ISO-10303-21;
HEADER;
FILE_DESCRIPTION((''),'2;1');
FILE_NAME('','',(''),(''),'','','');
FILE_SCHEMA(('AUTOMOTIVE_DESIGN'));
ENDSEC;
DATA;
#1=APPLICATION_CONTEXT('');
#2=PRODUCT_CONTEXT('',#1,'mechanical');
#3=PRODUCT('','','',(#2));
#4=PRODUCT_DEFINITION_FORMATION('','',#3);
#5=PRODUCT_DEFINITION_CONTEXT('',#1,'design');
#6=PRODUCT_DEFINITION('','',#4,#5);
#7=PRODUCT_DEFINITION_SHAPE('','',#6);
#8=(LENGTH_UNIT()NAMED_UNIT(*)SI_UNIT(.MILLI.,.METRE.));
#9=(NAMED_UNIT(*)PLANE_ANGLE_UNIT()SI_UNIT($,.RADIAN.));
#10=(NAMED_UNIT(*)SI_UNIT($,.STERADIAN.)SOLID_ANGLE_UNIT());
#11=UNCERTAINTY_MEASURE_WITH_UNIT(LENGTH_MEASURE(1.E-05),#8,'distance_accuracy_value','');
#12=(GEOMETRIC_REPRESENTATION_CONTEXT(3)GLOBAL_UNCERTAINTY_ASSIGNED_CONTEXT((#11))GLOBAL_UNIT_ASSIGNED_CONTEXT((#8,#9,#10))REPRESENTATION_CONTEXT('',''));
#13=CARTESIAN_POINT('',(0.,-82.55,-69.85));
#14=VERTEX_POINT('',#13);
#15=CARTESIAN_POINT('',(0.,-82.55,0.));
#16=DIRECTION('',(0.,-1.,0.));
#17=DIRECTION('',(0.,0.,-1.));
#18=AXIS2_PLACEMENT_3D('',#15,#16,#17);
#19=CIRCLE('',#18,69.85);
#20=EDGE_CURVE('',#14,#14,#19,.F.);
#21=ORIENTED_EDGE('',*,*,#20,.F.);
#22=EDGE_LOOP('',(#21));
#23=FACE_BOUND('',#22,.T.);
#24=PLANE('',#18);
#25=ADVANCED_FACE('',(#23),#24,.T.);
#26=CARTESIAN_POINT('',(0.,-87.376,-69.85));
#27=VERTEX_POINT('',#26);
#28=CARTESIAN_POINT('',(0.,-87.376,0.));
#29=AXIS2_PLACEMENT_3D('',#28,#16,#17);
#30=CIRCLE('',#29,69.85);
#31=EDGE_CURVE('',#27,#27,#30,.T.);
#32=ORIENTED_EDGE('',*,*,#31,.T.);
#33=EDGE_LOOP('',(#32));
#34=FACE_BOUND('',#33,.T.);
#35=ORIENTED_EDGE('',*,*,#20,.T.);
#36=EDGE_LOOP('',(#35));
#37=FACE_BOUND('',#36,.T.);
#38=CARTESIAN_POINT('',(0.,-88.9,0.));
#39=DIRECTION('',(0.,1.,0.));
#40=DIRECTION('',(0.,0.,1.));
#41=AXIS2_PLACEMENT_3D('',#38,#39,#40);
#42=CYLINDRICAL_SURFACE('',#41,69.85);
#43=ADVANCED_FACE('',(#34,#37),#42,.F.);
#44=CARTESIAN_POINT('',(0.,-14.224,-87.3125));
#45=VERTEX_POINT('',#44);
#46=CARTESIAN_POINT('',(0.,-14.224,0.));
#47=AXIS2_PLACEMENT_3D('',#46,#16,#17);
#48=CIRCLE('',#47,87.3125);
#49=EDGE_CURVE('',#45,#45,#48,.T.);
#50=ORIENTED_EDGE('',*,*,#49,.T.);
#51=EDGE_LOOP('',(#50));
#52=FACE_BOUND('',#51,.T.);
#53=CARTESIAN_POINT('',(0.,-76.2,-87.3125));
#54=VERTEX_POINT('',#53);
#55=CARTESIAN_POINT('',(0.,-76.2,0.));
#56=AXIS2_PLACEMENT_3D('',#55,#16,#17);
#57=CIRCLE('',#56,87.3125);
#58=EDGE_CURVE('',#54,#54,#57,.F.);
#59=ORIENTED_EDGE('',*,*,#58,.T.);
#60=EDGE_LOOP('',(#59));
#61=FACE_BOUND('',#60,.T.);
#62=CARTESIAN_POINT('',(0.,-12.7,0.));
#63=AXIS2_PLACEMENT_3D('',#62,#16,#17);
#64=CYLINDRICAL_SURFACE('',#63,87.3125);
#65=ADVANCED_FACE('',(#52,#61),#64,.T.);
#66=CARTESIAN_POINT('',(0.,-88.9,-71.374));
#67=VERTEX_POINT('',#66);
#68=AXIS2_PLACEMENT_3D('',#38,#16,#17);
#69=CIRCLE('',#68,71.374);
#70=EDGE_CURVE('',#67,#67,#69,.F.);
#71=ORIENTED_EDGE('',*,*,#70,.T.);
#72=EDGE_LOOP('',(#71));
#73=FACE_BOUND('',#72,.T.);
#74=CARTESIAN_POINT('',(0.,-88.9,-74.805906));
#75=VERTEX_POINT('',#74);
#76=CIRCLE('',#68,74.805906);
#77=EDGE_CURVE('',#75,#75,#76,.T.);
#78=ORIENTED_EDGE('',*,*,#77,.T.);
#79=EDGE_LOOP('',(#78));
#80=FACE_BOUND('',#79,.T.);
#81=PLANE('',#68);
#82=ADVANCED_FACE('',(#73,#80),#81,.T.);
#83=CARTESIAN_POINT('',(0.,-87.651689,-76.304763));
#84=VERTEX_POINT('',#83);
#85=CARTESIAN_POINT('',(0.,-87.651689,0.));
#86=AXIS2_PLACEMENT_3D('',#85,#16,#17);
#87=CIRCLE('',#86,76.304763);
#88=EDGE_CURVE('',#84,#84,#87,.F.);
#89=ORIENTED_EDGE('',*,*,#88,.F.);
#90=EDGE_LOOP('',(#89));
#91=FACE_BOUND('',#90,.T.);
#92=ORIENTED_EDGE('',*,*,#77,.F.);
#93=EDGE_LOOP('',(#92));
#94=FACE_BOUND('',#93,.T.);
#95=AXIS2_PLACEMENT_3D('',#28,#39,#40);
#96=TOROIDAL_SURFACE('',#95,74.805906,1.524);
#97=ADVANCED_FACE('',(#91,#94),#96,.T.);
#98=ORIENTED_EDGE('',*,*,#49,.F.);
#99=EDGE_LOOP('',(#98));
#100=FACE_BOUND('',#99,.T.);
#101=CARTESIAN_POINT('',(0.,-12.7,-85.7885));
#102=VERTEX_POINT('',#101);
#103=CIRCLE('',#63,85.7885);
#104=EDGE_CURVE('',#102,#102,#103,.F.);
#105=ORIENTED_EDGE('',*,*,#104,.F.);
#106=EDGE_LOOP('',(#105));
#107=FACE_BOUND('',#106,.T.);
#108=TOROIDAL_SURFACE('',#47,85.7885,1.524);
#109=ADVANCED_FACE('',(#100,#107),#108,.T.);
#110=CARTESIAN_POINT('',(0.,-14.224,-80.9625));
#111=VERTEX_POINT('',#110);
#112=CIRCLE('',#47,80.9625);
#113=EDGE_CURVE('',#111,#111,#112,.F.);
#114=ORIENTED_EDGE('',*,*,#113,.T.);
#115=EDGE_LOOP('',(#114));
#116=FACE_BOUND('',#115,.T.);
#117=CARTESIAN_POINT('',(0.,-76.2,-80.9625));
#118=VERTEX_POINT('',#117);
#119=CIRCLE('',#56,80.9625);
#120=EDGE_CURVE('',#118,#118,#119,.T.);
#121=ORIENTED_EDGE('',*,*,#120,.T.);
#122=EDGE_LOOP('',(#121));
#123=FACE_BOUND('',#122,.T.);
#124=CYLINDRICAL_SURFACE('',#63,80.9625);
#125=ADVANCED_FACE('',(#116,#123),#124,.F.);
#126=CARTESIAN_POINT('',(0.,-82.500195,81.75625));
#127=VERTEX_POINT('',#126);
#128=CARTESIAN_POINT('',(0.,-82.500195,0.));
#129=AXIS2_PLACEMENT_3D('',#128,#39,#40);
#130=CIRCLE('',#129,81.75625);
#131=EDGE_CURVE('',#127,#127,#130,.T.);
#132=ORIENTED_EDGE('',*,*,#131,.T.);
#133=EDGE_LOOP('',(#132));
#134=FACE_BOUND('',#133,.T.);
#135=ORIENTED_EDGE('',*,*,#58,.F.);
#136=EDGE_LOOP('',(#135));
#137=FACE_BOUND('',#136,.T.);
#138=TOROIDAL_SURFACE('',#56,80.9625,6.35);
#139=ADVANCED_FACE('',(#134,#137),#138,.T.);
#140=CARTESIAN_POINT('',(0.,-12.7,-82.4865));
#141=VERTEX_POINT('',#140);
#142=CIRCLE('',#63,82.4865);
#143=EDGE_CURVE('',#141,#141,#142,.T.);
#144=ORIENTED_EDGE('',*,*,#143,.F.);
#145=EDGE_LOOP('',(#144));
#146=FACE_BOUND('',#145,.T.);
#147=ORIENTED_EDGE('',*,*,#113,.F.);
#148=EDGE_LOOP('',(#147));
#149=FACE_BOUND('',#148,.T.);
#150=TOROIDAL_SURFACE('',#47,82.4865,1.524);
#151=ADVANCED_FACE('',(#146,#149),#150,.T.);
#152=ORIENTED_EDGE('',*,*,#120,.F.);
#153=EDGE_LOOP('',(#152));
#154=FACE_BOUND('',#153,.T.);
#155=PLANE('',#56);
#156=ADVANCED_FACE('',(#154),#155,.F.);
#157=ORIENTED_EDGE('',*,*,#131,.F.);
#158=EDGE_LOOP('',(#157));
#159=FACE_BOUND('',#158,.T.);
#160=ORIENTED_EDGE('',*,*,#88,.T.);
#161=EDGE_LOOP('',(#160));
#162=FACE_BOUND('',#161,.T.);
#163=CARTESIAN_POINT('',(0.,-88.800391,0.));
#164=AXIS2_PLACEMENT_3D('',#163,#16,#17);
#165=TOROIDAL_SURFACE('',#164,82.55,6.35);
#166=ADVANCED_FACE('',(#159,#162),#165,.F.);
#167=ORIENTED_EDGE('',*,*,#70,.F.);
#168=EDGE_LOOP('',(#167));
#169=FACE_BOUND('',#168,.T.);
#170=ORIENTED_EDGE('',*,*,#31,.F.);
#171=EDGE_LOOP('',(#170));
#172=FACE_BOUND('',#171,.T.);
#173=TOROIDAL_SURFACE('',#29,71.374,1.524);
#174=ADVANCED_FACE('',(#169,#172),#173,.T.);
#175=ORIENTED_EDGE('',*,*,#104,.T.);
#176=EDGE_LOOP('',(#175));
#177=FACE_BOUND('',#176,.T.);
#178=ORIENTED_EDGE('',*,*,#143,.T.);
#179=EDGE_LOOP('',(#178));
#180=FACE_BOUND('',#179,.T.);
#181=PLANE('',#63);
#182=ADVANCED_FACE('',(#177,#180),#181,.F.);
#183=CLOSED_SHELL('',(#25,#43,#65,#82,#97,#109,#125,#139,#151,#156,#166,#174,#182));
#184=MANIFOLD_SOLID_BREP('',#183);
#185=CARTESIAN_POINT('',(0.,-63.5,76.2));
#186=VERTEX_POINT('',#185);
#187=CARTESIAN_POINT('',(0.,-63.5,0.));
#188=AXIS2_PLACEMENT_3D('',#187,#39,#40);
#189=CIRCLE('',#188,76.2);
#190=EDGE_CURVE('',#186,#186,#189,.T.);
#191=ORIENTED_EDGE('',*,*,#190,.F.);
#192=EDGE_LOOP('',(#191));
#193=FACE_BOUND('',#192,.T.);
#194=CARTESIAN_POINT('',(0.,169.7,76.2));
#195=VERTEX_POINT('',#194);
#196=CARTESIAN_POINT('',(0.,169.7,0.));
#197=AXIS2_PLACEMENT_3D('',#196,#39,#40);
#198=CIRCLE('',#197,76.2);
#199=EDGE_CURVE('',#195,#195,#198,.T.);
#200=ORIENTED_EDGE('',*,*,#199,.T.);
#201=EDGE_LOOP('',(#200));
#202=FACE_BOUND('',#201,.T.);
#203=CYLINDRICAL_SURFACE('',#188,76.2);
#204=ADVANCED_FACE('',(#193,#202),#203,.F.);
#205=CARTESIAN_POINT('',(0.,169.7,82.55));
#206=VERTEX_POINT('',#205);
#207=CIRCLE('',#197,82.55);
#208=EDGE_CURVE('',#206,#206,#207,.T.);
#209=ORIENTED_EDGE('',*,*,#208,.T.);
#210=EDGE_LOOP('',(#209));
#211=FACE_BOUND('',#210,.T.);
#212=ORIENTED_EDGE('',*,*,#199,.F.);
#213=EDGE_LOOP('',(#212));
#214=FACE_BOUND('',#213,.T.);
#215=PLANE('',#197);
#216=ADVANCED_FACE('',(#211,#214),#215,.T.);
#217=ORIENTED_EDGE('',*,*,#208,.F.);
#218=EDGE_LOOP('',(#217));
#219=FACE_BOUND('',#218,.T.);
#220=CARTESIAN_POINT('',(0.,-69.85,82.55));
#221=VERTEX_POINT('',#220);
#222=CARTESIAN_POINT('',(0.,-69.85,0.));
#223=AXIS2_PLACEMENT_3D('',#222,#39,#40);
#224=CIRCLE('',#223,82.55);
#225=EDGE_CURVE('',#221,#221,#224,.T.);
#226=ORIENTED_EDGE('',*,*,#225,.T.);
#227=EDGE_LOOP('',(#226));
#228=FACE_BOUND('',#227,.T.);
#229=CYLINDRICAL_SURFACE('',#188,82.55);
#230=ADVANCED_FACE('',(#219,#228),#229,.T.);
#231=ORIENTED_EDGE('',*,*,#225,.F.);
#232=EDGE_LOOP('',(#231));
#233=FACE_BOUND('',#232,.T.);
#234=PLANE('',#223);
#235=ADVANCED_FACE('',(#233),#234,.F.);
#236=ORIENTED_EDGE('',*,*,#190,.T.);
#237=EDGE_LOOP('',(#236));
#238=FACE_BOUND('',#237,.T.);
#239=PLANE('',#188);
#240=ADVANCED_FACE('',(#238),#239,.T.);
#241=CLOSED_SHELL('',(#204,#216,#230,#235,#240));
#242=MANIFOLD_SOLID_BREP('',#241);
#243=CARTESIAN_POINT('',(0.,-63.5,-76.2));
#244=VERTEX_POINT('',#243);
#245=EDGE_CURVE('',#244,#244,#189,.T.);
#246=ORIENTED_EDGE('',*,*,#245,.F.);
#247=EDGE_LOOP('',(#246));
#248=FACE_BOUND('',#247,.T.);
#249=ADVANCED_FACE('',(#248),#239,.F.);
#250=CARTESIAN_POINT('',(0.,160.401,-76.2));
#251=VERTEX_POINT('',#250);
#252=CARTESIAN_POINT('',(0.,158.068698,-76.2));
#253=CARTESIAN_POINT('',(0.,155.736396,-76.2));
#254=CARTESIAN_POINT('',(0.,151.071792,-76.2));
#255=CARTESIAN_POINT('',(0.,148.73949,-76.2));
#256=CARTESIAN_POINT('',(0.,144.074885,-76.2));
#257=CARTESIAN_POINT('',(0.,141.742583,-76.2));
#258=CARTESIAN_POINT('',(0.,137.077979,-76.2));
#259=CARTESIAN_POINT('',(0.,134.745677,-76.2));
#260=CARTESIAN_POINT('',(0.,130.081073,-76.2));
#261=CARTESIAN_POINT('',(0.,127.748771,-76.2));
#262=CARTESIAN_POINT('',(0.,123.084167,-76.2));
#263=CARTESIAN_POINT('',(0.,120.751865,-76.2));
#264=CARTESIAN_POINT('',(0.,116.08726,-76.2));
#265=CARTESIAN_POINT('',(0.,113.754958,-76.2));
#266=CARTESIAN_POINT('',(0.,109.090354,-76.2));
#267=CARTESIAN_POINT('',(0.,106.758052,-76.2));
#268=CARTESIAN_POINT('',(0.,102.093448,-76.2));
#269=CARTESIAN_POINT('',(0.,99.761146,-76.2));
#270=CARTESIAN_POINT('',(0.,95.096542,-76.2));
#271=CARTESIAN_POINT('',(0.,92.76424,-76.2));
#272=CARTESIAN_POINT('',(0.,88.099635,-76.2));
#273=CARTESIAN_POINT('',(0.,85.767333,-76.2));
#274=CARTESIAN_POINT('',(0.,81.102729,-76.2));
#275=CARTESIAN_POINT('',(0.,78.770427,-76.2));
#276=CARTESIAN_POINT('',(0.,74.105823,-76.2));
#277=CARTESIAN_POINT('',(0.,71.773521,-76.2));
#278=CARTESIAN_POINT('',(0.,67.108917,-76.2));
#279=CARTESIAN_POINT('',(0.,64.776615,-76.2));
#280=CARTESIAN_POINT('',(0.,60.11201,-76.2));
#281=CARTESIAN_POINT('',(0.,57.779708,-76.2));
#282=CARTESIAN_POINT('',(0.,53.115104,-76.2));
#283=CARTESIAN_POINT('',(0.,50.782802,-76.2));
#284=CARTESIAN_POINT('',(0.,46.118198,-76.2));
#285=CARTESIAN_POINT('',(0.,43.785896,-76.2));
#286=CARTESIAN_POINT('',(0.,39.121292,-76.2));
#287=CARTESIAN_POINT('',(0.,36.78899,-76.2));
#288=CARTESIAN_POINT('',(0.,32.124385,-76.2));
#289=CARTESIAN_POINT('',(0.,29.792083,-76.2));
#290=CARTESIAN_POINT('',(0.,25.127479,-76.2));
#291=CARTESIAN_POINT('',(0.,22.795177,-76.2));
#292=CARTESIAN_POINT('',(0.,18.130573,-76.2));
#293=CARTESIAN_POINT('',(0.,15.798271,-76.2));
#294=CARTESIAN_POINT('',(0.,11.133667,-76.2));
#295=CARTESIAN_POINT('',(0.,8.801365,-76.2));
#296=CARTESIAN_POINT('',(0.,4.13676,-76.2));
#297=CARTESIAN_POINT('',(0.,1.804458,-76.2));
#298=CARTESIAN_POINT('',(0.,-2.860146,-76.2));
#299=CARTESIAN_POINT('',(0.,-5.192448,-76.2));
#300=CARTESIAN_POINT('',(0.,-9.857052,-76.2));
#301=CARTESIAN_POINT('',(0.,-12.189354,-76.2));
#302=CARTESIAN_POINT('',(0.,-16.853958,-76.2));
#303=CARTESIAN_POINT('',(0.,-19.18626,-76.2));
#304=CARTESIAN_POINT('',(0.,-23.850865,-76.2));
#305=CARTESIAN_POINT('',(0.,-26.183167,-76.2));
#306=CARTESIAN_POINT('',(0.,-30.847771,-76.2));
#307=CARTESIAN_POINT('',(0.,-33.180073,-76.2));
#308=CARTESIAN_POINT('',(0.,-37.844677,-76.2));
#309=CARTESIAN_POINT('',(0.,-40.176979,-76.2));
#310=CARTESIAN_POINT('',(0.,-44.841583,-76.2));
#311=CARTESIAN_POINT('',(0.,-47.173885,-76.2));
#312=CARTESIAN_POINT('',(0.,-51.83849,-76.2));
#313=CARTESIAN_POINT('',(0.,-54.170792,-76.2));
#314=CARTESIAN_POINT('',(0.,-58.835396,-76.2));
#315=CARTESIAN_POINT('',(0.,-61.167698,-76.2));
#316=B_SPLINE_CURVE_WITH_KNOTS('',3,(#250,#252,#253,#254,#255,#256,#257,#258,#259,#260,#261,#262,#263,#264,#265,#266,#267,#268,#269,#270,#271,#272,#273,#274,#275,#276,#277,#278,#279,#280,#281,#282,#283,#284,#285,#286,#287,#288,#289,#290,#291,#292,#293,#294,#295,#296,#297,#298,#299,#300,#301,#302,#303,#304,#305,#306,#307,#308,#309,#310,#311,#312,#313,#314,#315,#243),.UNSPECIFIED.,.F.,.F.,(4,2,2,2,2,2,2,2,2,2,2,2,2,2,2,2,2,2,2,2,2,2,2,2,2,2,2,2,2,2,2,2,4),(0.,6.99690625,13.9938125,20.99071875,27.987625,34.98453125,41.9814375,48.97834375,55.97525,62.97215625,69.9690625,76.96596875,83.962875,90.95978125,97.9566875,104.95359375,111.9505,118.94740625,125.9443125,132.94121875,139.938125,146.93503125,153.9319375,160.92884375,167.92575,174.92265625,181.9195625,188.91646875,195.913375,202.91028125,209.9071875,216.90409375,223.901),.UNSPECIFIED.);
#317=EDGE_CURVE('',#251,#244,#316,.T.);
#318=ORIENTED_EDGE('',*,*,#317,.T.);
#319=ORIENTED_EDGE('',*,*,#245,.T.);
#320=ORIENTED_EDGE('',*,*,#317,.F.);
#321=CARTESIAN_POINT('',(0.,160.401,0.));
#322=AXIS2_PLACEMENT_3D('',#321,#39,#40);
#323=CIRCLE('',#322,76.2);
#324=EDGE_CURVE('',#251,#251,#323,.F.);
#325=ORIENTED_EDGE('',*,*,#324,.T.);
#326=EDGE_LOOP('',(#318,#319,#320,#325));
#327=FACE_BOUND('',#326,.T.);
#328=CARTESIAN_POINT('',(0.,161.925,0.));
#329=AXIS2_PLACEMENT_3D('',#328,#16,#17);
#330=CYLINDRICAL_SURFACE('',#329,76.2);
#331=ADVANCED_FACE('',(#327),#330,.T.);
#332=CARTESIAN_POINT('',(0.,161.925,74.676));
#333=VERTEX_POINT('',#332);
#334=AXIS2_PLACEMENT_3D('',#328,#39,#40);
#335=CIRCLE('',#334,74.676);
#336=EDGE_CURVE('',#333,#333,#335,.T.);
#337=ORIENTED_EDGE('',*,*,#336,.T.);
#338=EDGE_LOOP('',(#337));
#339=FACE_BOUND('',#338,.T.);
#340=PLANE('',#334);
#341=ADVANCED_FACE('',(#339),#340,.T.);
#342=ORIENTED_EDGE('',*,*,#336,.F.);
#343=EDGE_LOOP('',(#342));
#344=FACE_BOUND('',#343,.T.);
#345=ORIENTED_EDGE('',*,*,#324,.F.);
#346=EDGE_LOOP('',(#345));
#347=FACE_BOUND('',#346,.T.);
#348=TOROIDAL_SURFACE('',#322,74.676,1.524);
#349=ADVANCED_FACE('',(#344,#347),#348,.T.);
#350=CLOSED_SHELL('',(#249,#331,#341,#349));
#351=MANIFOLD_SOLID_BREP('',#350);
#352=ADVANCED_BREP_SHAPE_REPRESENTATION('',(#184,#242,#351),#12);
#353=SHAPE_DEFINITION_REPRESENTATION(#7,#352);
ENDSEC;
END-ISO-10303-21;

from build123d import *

# Parameters (mm, degrees)
BOSS_EXTRUDE1_DEPTH      = 169.7
BOSS_EXTRUDE1_DEPTH_BACK = 63.5
SKETCH1_R                = 76.2
SHELL1_T                 = 6.35
SKETCH2_R                = 80.9625
BOSS_EXTRUDE2_DEPTH      = 63.5
SHELL3_T                 = 6.35
FILLET1_R                = 1.524
FILLET2_R                = 6.35
BOSS_EXTRUDE3_START      = 6.35
SKETCH3_R                = 76.2
SKETCH3_R_2              = 69.85
BOSS_EXTRUDE3_DEPTH      = 6.35
FILLET3_R                = 6.35
FILLET4_R                = 1.524
SKETCH4_R                = 76.2
BOSS_EXTRUDE4_DEPTH      = 225.425
FILLET5_R                = 1.524


# Some blends are built 0.0001 mm under size
with BuildPart() as part:
    # Sketch1 → Boss-Extrude1 (new, two sides: drawn at the far end of the back side and taken through both)
    with BuildSketch(Plane(origin=(0, 0, 0), x_dir=(1, 0, 0), z_dir=(0, 1, 0)).offset(-BOSS_EXTRUDE1_DEPTH_BACK)):
        with Locations(Location((0, 0, 0), (0, 0, 270))):
            Circle(SKETCH1_R)
    extrude(amount=BOSS_EXTRUDE1_DEPTH + BOSS_EXTRUDE1_DEPTH_BACK)

    # Shell1
    shell1_openings = [part.faces().sort_by_distance(p)[0] for p in [
        (0, 169.7, 0),
    ]]
    offset(amount=SHELL1_T, openings=shell1_openings, kind=Kind.INTERSECTION)


with BuildPart() as body_2:
    # Sketch2 → Boss-Extrude2 (new body)
    with BuildSketch(Plane.XZ.offset(76.2)):
        with Locations(Location((0, 0, 0), (0, 0, 270))):
            Circle(SKETCH2_R)
    extrude(amount=-BOSS_EXTRUDE2_DEPTH)

    # Shell3
    shell3_openings = [body_2.faces().sort_by_distance(p)[0] for p in [
        (0, -12.7, 0),
    ]]
    offset(amount=SHELL3_T, openings=shell3_openings, kind=Kind.INTERSECTION)

    # Fillet1
    # the kernel refuses this fillet: 1.524 mm, written as the material it takes off along each edge
    with BuildSketch(Plane(origin=(0, -12.7, 0), x_dir=(0, 0, -1), z_dir=(-1, 0, 0))) as fillet1_piece_1:
        with BuildLine():
            CenterArc((87.3125 - FILLET1_R, FILLET1_R), FILLET1_R, 270, 90)
            Line((87.3125, FILLET1_R), (87.3125, 0))
            Line((87.3125, 0), (87.3125 - FILLET1_R, 0))
        make_face()
    revolve(axis=Axis((0, -12.7, 0), (0, -1, 0)), mode=Mode.SUBTRACT)
    with BuildSketch(Plane(origin=(0, -12.7, 0), x_dir=(0, 0, -1), z_dir=(-1, 0, 0))) as fillet1_piece_2:
        with BuildLine():
            CenterArc((80.9625 + FILLET1_R, FILLET1_R), FILLET1_R, 180, 90)
            Line((80.9625 + FILLET1_R, 0), (80.9625, 0))
            Line((80.9625, 0), (80.9625, FILLET1_R))
        make_face()
    revolve(axis=Axis((0, -12.7, 0), (0, -1, 0)), mode=Mode.SUBTRACT)

    # Fillet2
    fillet2_edges = [body_2.edges().sort_by_distance(p)[0] for p in [
        (0, -82.55, 87.3125),
    ]]
    fillet(fillet2_edges, radius=FILLET2_R)

    # Sketch3 → Boss-Extrude3 (add)
    with BuildSketch(Plane.XZ.offset(82.55).offset(BOSS_EXTRUDE3_START)):
        with Locations(Location((0, 0, 0), (0, 0, 270))):
            Circle(SKETCH3_R)
        with Locations(Location((0, 0, 0), (0, 0, 270))):
            Circle(SKETCH3_R_2, mode=Mode.SUBTRACT)
    extrude(amount=-BOSS_EXTRUDE3_DEPTH)

    # Fillet3
    fillet3_edges = [body_2.edges().sort_by_distance(p)[0] for p in [
        (0, -82.55, 76.2),
    ]]
    fillet(fillet3_edges, radius=FILLET3_R - 0.0001)  # a hair under: the kernel refuses the full size

    # Fillet4
    fillet4_edges = [body_2.edges().sort_by_distance(p)[0] for p in [
        (0, -88.9, 69.85),
        (0, -88.9, 76.2),
    ]]
    fillet(fillet4_edges, radius=FILLET4_R)


with BuildPart() as body_3:
    # Sketch4 → Boss-Extrude4 (new body)
    with BuildSketch(Plane(origin=(0, -63.5, 0), x_dir=(1, 0, 0), z_dir=(0, 1, 0))):
        with Locations(Location((0, 0, 0), (0, 0, 90))):
            Circle(SKETCH4_R)
    extrude(amount=BOSS_EXTRUDE4_DEPTH)

    # Fillet5
    fillet5_edges = [body_3.edges().sort_by_distance(p)[0] for p in [
        (0, 161.925, 76.2),
    ]]
    fillet(fillet5_edges, radius=FILLET5_R)


solid = Compound([part.part, body_2.part, body_3.part])
